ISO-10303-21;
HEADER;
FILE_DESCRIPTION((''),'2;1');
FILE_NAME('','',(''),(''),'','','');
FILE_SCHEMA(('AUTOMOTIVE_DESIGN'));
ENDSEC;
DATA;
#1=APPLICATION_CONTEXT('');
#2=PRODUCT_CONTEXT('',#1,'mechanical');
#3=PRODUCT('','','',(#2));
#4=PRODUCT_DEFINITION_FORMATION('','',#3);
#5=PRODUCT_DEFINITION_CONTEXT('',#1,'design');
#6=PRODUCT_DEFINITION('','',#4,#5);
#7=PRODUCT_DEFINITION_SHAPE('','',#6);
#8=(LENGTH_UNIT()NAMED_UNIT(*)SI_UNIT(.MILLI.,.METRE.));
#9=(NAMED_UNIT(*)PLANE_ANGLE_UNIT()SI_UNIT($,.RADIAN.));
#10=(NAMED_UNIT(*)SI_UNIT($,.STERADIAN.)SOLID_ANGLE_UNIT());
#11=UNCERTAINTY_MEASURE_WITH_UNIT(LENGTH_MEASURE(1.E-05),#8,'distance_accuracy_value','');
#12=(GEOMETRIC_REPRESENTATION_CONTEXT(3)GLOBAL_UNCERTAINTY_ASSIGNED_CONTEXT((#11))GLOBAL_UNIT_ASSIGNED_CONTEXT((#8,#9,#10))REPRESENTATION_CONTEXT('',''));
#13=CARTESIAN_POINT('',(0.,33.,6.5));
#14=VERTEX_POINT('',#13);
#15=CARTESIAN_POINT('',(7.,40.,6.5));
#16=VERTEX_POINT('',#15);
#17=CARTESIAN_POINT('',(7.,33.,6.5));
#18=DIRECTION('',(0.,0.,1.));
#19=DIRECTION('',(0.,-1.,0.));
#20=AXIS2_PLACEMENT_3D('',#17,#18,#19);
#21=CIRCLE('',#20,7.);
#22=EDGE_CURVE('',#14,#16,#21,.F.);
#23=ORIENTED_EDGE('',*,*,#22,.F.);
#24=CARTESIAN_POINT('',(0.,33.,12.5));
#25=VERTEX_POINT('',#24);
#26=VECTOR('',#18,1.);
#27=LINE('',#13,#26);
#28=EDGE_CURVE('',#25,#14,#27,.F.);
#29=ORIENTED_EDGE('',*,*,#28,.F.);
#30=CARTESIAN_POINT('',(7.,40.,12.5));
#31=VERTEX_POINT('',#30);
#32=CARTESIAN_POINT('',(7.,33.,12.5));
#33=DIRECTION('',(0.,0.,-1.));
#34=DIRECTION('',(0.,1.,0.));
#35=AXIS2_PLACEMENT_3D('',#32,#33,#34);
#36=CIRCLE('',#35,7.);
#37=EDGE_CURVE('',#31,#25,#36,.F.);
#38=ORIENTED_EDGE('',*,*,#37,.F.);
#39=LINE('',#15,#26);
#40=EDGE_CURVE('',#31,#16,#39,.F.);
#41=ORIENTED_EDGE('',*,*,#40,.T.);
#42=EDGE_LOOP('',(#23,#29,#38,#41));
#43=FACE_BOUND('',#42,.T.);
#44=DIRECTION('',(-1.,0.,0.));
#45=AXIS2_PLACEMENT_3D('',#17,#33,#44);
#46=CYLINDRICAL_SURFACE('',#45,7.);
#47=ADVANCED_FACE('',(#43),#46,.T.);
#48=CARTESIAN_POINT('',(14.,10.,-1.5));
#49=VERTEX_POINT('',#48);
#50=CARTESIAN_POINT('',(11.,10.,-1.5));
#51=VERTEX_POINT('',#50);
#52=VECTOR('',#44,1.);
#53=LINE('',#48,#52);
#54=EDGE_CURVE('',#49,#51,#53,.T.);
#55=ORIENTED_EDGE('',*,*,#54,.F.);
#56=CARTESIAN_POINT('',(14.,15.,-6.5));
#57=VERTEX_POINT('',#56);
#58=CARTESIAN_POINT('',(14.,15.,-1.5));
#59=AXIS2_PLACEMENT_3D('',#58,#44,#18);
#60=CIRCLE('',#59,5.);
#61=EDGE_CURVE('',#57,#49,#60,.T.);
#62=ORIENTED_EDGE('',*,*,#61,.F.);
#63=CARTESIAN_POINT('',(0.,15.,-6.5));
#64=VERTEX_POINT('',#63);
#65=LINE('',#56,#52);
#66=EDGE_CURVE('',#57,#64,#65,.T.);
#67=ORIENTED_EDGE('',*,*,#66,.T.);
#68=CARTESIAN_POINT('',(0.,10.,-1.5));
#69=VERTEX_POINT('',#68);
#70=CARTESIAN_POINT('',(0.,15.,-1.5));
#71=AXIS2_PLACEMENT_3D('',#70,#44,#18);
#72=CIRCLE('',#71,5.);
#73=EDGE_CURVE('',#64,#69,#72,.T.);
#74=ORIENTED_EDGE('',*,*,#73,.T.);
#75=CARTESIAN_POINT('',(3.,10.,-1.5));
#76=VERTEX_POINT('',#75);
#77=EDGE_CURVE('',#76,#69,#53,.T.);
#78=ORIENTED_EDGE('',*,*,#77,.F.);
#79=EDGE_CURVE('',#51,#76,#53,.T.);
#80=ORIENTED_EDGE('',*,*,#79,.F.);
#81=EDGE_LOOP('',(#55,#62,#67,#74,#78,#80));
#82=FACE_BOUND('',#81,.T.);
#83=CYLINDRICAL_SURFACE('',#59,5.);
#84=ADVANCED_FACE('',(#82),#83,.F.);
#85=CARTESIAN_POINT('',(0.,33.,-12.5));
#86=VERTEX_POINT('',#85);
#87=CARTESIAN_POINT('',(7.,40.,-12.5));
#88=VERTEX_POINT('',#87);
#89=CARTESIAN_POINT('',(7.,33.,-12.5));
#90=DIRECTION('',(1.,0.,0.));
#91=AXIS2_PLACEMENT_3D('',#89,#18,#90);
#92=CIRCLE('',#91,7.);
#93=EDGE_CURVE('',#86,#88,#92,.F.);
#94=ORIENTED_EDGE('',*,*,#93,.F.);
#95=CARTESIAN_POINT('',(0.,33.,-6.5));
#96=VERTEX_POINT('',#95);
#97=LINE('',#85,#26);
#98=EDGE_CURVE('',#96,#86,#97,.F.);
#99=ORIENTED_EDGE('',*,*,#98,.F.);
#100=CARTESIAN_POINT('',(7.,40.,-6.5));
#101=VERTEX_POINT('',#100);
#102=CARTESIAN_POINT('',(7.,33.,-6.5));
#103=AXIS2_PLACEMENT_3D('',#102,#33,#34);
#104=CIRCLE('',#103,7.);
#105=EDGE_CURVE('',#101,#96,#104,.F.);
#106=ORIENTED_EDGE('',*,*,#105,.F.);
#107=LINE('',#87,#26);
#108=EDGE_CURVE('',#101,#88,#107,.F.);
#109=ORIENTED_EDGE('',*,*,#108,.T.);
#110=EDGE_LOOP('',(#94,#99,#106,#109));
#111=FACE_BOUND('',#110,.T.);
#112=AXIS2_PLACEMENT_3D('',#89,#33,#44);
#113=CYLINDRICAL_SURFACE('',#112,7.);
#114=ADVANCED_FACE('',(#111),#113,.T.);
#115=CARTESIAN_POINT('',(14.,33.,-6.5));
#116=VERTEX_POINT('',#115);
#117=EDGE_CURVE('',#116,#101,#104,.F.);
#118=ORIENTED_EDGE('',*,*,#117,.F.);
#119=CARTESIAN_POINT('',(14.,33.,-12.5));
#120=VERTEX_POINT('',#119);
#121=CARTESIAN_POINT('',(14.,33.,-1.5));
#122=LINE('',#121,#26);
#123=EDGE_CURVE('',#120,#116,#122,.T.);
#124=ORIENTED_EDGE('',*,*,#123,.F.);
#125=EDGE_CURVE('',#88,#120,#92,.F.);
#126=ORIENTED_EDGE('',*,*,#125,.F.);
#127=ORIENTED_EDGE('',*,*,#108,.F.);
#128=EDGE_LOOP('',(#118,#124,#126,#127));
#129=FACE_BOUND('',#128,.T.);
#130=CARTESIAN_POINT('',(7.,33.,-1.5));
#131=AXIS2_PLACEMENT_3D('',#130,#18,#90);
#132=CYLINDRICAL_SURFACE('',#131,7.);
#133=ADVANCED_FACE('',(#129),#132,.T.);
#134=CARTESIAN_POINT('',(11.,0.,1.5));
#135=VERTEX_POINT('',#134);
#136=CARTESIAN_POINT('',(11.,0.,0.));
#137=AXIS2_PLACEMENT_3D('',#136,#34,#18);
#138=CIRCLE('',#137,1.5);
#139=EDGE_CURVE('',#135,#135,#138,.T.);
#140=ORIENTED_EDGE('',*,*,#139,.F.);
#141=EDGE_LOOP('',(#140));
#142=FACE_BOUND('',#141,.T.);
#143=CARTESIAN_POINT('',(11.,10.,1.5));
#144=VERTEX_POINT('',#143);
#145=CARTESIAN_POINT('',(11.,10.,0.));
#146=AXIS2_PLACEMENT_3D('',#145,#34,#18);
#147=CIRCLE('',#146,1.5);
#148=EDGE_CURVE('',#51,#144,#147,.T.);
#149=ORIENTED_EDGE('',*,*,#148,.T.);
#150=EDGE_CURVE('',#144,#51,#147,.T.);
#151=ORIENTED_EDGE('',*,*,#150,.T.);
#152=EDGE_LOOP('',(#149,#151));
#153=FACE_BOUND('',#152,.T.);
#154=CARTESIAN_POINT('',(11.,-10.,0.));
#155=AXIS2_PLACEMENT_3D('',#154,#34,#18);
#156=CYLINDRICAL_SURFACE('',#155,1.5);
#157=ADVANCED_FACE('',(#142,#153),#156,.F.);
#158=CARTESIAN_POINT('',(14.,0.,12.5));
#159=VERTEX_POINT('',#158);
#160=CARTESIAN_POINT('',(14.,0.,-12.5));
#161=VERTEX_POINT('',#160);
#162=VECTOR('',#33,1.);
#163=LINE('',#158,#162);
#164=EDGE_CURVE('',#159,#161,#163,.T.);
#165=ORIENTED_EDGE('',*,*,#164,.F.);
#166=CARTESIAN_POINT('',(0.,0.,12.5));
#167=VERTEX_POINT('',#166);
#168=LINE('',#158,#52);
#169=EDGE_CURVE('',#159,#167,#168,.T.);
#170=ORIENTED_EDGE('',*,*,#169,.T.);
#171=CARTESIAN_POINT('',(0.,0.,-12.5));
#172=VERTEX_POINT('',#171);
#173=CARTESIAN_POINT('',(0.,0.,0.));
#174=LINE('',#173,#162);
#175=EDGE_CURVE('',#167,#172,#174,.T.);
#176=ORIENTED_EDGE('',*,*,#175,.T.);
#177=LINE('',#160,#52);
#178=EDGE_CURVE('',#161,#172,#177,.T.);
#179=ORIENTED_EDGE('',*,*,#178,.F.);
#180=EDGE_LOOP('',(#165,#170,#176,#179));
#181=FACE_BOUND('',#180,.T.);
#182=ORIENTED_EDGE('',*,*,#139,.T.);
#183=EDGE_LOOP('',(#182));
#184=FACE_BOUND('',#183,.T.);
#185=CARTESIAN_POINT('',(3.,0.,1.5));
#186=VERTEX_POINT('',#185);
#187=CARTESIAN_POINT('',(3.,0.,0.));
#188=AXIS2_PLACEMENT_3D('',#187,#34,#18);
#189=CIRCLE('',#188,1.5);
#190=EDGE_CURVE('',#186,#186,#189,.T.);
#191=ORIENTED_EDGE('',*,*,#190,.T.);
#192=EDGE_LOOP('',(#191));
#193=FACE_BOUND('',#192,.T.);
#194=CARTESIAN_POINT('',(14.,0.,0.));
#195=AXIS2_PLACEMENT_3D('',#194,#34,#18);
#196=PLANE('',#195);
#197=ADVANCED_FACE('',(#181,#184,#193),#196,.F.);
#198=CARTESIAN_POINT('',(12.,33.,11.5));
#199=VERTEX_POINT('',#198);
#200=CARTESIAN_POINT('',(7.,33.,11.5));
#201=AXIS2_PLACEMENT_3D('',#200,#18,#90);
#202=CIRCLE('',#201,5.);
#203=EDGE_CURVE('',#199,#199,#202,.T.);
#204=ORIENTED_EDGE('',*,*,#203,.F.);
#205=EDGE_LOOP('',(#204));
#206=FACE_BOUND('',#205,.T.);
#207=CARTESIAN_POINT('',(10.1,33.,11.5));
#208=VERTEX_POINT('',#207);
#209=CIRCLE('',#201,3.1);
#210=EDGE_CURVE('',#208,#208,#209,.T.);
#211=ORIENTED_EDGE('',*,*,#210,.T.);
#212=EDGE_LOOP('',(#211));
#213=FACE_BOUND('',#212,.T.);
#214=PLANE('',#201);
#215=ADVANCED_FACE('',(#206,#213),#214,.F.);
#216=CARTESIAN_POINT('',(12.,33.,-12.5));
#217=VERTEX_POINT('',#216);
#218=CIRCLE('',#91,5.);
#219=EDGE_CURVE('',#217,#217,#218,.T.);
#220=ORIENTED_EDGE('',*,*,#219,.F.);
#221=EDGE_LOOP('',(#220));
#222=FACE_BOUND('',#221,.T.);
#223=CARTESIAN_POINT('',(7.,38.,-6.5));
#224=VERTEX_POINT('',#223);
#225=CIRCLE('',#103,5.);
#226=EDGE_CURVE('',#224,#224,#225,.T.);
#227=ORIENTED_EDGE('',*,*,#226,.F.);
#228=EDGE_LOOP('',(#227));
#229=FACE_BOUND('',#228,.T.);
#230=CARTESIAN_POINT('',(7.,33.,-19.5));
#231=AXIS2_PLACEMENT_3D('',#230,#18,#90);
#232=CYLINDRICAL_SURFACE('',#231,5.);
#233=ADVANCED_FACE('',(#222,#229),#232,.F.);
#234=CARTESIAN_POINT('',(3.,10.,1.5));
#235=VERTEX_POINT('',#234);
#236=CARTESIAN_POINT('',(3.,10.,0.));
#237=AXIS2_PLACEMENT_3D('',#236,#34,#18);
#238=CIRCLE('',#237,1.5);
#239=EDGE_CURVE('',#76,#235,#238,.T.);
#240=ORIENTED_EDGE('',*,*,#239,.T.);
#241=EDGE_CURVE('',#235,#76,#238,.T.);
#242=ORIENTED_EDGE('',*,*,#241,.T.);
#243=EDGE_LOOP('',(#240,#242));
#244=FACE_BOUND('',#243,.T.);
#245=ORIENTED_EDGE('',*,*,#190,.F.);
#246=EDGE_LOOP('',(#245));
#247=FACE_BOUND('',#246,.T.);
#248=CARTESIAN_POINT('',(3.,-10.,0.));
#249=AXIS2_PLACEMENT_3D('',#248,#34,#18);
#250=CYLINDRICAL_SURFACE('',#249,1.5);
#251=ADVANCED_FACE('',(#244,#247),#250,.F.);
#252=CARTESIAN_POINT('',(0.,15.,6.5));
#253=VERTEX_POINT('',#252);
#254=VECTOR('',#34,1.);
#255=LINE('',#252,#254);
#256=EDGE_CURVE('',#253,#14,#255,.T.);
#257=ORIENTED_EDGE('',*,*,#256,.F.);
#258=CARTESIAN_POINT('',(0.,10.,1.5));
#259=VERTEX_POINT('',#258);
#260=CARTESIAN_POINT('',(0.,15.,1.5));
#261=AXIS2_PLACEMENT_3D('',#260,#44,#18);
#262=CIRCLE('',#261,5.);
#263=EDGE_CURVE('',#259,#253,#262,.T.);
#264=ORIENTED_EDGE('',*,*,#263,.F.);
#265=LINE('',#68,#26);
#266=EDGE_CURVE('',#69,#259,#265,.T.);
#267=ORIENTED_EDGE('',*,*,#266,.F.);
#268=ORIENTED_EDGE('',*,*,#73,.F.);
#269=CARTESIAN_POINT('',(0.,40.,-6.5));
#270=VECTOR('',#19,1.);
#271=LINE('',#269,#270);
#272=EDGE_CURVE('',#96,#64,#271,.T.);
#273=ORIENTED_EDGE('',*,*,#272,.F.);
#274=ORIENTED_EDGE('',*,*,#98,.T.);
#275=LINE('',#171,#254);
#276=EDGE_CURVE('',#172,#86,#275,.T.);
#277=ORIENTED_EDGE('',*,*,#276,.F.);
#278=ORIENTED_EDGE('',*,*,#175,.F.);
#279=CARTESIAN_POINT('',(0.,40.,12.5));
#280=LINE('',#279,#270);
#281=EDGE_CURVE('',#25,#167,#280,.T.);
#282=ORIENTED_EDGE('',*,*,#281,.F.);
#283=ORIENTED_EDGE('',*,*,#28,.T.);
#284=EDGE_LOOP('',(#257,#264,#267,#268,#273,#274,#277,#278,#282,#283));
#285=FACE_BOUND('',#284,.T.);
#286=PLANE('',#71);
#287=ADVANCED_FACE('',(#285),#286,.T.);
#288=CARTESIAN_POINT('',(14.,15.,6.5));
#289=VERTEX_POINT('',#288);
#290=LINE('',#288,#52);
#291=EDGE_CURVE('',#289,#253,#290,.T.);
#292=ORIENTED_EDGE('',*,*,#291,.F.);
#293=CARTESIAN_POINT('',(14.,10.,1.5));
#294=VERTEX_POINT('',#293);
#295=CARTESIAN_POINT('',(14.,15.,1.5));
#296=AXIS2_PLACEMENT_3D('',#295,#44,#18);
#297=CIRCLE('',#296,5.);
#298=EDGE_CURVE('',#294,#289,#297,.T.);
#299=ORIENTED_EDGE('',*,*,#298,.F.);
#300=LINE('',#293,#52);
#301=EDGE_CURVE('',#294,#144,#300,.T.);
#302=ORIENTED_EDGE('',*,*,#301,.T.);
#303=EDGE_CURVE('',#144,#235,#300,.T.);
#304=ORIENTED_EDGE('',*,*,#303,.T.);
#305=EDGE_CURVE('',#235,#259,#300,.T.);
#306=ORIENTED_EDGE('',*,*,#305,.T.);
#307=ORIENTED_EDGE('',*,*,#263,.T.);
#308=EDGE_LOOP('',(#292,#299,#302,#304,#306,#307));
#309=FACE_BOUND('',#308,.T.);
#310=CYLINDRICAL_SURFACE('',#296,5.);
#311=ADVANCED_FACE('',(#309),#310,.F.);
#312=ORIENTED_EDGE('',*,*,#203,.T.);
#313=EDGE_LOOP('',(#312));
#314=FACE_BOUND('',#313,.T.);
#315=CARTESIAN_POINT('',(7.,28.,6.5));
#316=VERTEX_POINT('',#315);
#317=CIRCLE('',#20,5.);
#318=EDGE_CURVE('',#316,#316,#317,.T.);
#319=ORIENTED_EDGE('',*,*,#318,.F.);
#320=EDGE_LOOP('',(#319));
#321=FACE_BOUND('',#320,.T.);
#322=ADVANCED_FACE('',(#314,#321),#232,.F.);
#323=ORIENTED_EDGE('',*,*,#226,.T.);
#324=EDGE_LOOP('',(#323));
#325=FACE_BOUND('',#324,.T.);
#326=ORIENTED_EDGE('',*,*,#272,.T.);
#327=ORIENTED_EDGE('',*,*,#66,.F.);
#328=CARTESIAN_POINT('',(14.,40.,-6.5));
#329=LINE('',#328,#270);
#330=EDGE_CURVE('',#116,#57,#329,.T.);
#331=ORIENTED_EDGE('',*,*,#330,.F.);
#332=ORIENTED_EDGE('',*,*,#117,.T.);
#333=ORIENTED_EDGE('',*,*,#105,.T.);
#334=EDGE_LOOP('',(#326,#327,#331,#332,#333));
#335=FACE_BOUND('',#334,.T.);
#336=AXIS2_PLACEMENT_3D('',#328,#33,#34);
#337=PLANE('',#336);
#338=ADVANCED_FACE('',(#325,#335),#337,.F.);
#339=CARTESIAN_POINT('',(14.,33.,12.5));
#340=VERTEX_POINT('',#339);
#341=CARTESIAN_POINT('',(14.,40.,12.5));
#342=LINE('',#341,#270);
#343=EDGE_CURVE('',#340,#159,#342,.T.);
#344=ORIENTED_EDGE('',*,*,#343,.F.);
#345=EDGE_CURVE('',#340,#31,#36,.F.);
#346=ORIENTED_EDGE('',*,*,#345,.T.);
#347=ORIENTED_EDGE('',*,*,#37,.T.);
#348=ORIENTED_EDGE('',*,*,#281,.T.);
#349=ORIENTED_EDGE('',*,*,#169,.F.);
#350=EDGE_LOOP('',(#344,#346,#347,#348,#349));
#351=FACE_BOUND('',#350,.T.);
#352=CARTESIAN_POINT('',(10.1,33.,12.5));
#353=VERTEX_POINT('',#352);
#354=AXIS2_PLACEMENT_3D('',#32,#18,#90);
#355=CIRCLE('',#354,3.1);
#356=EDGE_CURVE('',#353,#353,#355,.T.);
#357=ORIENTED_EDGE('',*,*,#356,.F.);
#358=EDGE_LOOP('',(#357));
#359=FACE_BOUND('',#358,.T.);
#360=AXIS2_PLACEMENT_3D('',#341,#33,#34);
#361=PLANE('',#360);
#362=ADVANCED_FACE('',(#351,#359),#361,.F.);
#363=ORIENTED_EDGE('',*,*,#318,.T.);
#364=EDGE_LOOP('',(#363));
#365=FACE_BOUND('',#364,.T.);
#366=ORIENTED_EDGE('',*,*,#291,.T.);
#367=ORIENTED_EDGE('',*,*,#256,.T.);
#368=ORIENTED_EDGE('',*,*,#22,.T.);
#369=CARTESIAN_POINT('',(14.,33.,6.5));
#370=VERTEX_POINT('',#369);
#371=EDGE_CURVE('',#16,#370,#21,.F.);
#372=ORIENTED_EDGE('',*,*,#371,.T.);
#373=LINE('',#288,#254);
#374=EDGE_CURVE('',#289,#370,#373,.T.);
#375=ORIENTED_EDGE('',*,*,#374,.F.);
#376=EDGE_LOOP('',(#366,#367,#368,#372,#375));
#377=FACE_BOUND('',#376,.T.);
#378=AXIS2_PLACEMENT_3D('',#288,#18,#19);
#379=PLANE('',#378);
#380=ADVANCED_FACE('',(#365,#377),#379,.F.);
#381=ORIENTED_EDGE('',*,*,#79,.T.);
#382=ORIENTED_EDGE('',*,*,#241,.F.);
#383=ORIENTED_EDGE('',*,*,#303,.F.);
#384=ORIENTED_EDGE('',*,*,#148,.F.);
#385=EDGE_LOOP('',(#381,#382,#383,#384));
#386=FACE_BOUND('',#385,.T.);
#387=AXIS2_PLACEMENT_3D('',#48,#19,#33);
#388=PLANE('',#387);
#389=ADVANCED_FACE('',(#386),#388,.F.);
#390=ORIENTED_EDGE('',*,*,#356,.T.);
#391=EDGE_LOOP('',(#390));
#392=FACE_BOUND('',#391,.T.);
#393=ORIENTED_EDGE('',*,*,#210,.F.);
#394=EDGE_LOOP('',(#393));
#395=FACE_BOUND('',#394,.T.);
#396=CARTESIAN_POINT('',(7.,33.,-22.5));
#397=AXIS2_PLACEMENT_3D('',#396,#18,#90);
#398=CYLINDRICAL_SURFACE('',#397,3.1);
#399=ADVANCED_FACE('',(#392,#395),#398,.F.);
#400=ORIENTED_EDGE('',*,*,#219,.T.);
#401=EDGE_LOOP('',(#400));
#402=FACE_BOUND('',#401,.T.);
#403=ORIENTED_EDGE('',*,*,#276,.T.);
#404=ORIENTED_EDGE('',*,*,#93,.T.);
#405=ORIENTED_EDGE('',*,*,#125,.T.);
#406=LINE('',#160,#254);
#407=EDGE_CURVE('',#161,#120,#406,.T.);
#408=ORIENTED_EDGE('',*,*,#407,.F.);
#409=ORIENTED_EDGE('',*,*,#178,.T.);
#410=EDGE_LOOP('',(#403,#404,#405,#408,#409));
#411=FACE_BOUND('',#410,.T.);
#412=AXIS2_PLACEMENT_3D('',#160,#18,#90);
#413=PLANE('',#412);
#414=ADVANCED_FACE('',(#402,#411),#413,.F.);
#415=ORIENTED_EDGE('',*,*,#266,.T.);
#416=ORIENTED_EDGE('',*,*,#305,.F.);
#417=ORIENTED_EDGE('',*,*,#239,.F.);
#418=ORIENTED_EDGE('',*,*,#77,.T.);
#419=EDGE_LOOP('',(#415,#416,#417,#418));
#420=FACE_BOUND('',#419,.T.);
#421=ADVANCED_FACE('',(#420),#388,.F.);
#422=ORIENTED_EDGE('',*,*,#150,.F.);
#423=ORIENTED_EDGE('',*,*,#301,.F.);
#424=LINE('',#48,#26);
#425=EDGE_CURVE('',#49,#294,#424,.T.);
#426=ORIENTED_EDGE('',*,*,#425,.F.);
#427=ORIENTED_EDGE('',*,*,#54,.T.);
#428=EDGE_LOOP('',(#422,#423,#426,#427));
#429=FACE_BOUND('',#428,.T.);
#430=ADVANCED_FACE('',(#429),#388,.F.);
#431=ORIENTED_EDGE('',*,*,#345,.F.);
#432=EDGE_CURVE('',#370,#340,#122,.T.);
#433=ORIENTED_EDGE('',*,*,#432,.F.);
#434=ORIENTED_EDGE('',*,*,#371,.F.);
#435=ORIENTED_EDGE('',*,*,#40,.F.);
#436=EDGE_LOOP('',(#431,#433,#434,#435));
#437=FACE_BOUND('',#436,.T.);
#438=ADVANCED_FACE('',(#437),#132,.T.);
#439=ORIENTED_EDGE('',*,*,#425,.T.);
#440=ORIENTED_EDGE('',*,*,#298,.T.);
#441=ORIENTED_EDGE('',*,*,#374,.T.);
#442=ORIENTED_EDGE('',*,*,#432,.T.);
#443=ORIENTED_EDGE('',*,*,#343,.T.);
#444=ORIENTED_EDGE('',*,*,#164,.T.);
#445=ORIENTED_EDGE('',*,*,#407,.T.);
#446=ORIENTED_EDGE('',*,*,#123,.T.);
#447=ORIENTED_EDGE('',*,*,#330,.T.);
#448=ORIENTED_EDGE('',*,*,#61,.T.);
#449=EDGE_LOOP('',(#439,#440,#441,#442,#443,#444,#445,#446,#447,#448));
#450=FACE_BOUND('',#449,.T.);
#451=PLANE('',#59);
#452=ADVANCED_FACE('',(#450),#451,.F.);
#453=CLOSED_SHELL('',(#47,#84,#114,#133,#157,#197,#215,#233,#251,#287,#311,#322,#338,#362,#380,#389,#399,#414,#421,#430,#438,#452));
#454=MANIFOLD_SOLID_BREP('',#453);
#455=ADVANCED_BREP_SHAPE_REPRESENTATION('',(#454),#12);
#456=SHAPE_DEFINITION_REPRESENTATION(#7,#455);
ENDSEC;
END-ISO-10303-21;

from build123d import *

# Parameters (mm, degrees)
EXTRUDE_1_DEPTH     = 14
FILLET_1_R          = 7
CUT_EXTRUDE_START   = -1
SKETCH_7_R          = 5
CUT_EXTRUDE_1_DEPTH = 31
SKETCH_8_R          = 3.1
CUT_EXTRUDE_2_DEPTH = 35
SKETCH_10_R         = 1.5
CUT_EXTRUDE_3_DEPTH = 20


with BuildPart() as part:
    # 草图4 → 凸台-拉伸1 (new body)
    with BuildSketch(Plane(origin=(0, 0, 0), x_dir=(0, 0, -1), z_dir=(1, 0, 0))):
        with BuildLine():
            Line((0, 0), (12.5, 0))
            Line((12.5, 0), (12.5, 40))
            Line((12.5, 40), (6.5, 40))
            Line((6.5, 40), (6.5, 15))
            ThreePointArc((6.5, 15), (5.035533906, 11.464466094), (1.5, 10))
            Line((1.5, 10), (-1.5, 10))
            ThreePointArc((-1.5, 10), (-5.035533906, 11.464466094), (-6.5, 15))
            Line((-6.5, 15), (-6.5, 40))
            Line((-6.5, 40), (-12.5, 40))
            Line((-12.5, 40), (-12.5, 0))
            Line((-12.5, 0), (0, 0))
        make_face()
    extrude(amount=EXTRUDE_1_DEPTH)

    # 圆角1
    fillet_1_edges = [part.edges().sort_by_distance(p)[0] for p in [
        (0, 40, 9.5),
        (0, 40, -9.5),
        (14, 40, -9.5),
        (14, 40, 9.5),
    ]]
    fillet(fillet_1_edges, radius=FILLET_1_R - 0.0001)  # a hair under: the kernel refuses the full size

    # 草图7 → 切除-拉伸1 (cut)
    with BuildSketch(Plane.XY.offset(12.5).offset(CUT_EXTRUDE_START)):
        with Locations((7, 33)):
            Circle(SKETCH_7_R)
    extrude(amount=-CUT_EXTRUDE_1_DEPTH, mode=Mode.SUBTRACT)

    # 草图8 → 切除-拉伸2 (cut)
    with BuildSketch(Plane.XY.offset(12.5)):
        with Locations((7, 33)):
            Circle(SKETCH_8_R)
    extrude(amount=-CUT_EXTRUDE_2_DEPTH, mode=Mode.SUBTRACT)

    # 草图10 → 切除-拉伸3 (cut)
    with BuildSketch(Plane(origin=(0, 10, 0), x_dir=(1, 0, 0), z_dir=(0, 1, 0))):
        with Locations(Location((3, 0, 0), (0, 0, 270))):
            Circle(SKETCH_10_R)
        with Locations(Location((11, 0, 0), (0, 0, 270))):
            Circle(SKETCH_10_R)
    extrude(amount=-CUT_EXTRUDE_3_DEPTH, mode=Mode.SUBTRACT)


solid = part.part
